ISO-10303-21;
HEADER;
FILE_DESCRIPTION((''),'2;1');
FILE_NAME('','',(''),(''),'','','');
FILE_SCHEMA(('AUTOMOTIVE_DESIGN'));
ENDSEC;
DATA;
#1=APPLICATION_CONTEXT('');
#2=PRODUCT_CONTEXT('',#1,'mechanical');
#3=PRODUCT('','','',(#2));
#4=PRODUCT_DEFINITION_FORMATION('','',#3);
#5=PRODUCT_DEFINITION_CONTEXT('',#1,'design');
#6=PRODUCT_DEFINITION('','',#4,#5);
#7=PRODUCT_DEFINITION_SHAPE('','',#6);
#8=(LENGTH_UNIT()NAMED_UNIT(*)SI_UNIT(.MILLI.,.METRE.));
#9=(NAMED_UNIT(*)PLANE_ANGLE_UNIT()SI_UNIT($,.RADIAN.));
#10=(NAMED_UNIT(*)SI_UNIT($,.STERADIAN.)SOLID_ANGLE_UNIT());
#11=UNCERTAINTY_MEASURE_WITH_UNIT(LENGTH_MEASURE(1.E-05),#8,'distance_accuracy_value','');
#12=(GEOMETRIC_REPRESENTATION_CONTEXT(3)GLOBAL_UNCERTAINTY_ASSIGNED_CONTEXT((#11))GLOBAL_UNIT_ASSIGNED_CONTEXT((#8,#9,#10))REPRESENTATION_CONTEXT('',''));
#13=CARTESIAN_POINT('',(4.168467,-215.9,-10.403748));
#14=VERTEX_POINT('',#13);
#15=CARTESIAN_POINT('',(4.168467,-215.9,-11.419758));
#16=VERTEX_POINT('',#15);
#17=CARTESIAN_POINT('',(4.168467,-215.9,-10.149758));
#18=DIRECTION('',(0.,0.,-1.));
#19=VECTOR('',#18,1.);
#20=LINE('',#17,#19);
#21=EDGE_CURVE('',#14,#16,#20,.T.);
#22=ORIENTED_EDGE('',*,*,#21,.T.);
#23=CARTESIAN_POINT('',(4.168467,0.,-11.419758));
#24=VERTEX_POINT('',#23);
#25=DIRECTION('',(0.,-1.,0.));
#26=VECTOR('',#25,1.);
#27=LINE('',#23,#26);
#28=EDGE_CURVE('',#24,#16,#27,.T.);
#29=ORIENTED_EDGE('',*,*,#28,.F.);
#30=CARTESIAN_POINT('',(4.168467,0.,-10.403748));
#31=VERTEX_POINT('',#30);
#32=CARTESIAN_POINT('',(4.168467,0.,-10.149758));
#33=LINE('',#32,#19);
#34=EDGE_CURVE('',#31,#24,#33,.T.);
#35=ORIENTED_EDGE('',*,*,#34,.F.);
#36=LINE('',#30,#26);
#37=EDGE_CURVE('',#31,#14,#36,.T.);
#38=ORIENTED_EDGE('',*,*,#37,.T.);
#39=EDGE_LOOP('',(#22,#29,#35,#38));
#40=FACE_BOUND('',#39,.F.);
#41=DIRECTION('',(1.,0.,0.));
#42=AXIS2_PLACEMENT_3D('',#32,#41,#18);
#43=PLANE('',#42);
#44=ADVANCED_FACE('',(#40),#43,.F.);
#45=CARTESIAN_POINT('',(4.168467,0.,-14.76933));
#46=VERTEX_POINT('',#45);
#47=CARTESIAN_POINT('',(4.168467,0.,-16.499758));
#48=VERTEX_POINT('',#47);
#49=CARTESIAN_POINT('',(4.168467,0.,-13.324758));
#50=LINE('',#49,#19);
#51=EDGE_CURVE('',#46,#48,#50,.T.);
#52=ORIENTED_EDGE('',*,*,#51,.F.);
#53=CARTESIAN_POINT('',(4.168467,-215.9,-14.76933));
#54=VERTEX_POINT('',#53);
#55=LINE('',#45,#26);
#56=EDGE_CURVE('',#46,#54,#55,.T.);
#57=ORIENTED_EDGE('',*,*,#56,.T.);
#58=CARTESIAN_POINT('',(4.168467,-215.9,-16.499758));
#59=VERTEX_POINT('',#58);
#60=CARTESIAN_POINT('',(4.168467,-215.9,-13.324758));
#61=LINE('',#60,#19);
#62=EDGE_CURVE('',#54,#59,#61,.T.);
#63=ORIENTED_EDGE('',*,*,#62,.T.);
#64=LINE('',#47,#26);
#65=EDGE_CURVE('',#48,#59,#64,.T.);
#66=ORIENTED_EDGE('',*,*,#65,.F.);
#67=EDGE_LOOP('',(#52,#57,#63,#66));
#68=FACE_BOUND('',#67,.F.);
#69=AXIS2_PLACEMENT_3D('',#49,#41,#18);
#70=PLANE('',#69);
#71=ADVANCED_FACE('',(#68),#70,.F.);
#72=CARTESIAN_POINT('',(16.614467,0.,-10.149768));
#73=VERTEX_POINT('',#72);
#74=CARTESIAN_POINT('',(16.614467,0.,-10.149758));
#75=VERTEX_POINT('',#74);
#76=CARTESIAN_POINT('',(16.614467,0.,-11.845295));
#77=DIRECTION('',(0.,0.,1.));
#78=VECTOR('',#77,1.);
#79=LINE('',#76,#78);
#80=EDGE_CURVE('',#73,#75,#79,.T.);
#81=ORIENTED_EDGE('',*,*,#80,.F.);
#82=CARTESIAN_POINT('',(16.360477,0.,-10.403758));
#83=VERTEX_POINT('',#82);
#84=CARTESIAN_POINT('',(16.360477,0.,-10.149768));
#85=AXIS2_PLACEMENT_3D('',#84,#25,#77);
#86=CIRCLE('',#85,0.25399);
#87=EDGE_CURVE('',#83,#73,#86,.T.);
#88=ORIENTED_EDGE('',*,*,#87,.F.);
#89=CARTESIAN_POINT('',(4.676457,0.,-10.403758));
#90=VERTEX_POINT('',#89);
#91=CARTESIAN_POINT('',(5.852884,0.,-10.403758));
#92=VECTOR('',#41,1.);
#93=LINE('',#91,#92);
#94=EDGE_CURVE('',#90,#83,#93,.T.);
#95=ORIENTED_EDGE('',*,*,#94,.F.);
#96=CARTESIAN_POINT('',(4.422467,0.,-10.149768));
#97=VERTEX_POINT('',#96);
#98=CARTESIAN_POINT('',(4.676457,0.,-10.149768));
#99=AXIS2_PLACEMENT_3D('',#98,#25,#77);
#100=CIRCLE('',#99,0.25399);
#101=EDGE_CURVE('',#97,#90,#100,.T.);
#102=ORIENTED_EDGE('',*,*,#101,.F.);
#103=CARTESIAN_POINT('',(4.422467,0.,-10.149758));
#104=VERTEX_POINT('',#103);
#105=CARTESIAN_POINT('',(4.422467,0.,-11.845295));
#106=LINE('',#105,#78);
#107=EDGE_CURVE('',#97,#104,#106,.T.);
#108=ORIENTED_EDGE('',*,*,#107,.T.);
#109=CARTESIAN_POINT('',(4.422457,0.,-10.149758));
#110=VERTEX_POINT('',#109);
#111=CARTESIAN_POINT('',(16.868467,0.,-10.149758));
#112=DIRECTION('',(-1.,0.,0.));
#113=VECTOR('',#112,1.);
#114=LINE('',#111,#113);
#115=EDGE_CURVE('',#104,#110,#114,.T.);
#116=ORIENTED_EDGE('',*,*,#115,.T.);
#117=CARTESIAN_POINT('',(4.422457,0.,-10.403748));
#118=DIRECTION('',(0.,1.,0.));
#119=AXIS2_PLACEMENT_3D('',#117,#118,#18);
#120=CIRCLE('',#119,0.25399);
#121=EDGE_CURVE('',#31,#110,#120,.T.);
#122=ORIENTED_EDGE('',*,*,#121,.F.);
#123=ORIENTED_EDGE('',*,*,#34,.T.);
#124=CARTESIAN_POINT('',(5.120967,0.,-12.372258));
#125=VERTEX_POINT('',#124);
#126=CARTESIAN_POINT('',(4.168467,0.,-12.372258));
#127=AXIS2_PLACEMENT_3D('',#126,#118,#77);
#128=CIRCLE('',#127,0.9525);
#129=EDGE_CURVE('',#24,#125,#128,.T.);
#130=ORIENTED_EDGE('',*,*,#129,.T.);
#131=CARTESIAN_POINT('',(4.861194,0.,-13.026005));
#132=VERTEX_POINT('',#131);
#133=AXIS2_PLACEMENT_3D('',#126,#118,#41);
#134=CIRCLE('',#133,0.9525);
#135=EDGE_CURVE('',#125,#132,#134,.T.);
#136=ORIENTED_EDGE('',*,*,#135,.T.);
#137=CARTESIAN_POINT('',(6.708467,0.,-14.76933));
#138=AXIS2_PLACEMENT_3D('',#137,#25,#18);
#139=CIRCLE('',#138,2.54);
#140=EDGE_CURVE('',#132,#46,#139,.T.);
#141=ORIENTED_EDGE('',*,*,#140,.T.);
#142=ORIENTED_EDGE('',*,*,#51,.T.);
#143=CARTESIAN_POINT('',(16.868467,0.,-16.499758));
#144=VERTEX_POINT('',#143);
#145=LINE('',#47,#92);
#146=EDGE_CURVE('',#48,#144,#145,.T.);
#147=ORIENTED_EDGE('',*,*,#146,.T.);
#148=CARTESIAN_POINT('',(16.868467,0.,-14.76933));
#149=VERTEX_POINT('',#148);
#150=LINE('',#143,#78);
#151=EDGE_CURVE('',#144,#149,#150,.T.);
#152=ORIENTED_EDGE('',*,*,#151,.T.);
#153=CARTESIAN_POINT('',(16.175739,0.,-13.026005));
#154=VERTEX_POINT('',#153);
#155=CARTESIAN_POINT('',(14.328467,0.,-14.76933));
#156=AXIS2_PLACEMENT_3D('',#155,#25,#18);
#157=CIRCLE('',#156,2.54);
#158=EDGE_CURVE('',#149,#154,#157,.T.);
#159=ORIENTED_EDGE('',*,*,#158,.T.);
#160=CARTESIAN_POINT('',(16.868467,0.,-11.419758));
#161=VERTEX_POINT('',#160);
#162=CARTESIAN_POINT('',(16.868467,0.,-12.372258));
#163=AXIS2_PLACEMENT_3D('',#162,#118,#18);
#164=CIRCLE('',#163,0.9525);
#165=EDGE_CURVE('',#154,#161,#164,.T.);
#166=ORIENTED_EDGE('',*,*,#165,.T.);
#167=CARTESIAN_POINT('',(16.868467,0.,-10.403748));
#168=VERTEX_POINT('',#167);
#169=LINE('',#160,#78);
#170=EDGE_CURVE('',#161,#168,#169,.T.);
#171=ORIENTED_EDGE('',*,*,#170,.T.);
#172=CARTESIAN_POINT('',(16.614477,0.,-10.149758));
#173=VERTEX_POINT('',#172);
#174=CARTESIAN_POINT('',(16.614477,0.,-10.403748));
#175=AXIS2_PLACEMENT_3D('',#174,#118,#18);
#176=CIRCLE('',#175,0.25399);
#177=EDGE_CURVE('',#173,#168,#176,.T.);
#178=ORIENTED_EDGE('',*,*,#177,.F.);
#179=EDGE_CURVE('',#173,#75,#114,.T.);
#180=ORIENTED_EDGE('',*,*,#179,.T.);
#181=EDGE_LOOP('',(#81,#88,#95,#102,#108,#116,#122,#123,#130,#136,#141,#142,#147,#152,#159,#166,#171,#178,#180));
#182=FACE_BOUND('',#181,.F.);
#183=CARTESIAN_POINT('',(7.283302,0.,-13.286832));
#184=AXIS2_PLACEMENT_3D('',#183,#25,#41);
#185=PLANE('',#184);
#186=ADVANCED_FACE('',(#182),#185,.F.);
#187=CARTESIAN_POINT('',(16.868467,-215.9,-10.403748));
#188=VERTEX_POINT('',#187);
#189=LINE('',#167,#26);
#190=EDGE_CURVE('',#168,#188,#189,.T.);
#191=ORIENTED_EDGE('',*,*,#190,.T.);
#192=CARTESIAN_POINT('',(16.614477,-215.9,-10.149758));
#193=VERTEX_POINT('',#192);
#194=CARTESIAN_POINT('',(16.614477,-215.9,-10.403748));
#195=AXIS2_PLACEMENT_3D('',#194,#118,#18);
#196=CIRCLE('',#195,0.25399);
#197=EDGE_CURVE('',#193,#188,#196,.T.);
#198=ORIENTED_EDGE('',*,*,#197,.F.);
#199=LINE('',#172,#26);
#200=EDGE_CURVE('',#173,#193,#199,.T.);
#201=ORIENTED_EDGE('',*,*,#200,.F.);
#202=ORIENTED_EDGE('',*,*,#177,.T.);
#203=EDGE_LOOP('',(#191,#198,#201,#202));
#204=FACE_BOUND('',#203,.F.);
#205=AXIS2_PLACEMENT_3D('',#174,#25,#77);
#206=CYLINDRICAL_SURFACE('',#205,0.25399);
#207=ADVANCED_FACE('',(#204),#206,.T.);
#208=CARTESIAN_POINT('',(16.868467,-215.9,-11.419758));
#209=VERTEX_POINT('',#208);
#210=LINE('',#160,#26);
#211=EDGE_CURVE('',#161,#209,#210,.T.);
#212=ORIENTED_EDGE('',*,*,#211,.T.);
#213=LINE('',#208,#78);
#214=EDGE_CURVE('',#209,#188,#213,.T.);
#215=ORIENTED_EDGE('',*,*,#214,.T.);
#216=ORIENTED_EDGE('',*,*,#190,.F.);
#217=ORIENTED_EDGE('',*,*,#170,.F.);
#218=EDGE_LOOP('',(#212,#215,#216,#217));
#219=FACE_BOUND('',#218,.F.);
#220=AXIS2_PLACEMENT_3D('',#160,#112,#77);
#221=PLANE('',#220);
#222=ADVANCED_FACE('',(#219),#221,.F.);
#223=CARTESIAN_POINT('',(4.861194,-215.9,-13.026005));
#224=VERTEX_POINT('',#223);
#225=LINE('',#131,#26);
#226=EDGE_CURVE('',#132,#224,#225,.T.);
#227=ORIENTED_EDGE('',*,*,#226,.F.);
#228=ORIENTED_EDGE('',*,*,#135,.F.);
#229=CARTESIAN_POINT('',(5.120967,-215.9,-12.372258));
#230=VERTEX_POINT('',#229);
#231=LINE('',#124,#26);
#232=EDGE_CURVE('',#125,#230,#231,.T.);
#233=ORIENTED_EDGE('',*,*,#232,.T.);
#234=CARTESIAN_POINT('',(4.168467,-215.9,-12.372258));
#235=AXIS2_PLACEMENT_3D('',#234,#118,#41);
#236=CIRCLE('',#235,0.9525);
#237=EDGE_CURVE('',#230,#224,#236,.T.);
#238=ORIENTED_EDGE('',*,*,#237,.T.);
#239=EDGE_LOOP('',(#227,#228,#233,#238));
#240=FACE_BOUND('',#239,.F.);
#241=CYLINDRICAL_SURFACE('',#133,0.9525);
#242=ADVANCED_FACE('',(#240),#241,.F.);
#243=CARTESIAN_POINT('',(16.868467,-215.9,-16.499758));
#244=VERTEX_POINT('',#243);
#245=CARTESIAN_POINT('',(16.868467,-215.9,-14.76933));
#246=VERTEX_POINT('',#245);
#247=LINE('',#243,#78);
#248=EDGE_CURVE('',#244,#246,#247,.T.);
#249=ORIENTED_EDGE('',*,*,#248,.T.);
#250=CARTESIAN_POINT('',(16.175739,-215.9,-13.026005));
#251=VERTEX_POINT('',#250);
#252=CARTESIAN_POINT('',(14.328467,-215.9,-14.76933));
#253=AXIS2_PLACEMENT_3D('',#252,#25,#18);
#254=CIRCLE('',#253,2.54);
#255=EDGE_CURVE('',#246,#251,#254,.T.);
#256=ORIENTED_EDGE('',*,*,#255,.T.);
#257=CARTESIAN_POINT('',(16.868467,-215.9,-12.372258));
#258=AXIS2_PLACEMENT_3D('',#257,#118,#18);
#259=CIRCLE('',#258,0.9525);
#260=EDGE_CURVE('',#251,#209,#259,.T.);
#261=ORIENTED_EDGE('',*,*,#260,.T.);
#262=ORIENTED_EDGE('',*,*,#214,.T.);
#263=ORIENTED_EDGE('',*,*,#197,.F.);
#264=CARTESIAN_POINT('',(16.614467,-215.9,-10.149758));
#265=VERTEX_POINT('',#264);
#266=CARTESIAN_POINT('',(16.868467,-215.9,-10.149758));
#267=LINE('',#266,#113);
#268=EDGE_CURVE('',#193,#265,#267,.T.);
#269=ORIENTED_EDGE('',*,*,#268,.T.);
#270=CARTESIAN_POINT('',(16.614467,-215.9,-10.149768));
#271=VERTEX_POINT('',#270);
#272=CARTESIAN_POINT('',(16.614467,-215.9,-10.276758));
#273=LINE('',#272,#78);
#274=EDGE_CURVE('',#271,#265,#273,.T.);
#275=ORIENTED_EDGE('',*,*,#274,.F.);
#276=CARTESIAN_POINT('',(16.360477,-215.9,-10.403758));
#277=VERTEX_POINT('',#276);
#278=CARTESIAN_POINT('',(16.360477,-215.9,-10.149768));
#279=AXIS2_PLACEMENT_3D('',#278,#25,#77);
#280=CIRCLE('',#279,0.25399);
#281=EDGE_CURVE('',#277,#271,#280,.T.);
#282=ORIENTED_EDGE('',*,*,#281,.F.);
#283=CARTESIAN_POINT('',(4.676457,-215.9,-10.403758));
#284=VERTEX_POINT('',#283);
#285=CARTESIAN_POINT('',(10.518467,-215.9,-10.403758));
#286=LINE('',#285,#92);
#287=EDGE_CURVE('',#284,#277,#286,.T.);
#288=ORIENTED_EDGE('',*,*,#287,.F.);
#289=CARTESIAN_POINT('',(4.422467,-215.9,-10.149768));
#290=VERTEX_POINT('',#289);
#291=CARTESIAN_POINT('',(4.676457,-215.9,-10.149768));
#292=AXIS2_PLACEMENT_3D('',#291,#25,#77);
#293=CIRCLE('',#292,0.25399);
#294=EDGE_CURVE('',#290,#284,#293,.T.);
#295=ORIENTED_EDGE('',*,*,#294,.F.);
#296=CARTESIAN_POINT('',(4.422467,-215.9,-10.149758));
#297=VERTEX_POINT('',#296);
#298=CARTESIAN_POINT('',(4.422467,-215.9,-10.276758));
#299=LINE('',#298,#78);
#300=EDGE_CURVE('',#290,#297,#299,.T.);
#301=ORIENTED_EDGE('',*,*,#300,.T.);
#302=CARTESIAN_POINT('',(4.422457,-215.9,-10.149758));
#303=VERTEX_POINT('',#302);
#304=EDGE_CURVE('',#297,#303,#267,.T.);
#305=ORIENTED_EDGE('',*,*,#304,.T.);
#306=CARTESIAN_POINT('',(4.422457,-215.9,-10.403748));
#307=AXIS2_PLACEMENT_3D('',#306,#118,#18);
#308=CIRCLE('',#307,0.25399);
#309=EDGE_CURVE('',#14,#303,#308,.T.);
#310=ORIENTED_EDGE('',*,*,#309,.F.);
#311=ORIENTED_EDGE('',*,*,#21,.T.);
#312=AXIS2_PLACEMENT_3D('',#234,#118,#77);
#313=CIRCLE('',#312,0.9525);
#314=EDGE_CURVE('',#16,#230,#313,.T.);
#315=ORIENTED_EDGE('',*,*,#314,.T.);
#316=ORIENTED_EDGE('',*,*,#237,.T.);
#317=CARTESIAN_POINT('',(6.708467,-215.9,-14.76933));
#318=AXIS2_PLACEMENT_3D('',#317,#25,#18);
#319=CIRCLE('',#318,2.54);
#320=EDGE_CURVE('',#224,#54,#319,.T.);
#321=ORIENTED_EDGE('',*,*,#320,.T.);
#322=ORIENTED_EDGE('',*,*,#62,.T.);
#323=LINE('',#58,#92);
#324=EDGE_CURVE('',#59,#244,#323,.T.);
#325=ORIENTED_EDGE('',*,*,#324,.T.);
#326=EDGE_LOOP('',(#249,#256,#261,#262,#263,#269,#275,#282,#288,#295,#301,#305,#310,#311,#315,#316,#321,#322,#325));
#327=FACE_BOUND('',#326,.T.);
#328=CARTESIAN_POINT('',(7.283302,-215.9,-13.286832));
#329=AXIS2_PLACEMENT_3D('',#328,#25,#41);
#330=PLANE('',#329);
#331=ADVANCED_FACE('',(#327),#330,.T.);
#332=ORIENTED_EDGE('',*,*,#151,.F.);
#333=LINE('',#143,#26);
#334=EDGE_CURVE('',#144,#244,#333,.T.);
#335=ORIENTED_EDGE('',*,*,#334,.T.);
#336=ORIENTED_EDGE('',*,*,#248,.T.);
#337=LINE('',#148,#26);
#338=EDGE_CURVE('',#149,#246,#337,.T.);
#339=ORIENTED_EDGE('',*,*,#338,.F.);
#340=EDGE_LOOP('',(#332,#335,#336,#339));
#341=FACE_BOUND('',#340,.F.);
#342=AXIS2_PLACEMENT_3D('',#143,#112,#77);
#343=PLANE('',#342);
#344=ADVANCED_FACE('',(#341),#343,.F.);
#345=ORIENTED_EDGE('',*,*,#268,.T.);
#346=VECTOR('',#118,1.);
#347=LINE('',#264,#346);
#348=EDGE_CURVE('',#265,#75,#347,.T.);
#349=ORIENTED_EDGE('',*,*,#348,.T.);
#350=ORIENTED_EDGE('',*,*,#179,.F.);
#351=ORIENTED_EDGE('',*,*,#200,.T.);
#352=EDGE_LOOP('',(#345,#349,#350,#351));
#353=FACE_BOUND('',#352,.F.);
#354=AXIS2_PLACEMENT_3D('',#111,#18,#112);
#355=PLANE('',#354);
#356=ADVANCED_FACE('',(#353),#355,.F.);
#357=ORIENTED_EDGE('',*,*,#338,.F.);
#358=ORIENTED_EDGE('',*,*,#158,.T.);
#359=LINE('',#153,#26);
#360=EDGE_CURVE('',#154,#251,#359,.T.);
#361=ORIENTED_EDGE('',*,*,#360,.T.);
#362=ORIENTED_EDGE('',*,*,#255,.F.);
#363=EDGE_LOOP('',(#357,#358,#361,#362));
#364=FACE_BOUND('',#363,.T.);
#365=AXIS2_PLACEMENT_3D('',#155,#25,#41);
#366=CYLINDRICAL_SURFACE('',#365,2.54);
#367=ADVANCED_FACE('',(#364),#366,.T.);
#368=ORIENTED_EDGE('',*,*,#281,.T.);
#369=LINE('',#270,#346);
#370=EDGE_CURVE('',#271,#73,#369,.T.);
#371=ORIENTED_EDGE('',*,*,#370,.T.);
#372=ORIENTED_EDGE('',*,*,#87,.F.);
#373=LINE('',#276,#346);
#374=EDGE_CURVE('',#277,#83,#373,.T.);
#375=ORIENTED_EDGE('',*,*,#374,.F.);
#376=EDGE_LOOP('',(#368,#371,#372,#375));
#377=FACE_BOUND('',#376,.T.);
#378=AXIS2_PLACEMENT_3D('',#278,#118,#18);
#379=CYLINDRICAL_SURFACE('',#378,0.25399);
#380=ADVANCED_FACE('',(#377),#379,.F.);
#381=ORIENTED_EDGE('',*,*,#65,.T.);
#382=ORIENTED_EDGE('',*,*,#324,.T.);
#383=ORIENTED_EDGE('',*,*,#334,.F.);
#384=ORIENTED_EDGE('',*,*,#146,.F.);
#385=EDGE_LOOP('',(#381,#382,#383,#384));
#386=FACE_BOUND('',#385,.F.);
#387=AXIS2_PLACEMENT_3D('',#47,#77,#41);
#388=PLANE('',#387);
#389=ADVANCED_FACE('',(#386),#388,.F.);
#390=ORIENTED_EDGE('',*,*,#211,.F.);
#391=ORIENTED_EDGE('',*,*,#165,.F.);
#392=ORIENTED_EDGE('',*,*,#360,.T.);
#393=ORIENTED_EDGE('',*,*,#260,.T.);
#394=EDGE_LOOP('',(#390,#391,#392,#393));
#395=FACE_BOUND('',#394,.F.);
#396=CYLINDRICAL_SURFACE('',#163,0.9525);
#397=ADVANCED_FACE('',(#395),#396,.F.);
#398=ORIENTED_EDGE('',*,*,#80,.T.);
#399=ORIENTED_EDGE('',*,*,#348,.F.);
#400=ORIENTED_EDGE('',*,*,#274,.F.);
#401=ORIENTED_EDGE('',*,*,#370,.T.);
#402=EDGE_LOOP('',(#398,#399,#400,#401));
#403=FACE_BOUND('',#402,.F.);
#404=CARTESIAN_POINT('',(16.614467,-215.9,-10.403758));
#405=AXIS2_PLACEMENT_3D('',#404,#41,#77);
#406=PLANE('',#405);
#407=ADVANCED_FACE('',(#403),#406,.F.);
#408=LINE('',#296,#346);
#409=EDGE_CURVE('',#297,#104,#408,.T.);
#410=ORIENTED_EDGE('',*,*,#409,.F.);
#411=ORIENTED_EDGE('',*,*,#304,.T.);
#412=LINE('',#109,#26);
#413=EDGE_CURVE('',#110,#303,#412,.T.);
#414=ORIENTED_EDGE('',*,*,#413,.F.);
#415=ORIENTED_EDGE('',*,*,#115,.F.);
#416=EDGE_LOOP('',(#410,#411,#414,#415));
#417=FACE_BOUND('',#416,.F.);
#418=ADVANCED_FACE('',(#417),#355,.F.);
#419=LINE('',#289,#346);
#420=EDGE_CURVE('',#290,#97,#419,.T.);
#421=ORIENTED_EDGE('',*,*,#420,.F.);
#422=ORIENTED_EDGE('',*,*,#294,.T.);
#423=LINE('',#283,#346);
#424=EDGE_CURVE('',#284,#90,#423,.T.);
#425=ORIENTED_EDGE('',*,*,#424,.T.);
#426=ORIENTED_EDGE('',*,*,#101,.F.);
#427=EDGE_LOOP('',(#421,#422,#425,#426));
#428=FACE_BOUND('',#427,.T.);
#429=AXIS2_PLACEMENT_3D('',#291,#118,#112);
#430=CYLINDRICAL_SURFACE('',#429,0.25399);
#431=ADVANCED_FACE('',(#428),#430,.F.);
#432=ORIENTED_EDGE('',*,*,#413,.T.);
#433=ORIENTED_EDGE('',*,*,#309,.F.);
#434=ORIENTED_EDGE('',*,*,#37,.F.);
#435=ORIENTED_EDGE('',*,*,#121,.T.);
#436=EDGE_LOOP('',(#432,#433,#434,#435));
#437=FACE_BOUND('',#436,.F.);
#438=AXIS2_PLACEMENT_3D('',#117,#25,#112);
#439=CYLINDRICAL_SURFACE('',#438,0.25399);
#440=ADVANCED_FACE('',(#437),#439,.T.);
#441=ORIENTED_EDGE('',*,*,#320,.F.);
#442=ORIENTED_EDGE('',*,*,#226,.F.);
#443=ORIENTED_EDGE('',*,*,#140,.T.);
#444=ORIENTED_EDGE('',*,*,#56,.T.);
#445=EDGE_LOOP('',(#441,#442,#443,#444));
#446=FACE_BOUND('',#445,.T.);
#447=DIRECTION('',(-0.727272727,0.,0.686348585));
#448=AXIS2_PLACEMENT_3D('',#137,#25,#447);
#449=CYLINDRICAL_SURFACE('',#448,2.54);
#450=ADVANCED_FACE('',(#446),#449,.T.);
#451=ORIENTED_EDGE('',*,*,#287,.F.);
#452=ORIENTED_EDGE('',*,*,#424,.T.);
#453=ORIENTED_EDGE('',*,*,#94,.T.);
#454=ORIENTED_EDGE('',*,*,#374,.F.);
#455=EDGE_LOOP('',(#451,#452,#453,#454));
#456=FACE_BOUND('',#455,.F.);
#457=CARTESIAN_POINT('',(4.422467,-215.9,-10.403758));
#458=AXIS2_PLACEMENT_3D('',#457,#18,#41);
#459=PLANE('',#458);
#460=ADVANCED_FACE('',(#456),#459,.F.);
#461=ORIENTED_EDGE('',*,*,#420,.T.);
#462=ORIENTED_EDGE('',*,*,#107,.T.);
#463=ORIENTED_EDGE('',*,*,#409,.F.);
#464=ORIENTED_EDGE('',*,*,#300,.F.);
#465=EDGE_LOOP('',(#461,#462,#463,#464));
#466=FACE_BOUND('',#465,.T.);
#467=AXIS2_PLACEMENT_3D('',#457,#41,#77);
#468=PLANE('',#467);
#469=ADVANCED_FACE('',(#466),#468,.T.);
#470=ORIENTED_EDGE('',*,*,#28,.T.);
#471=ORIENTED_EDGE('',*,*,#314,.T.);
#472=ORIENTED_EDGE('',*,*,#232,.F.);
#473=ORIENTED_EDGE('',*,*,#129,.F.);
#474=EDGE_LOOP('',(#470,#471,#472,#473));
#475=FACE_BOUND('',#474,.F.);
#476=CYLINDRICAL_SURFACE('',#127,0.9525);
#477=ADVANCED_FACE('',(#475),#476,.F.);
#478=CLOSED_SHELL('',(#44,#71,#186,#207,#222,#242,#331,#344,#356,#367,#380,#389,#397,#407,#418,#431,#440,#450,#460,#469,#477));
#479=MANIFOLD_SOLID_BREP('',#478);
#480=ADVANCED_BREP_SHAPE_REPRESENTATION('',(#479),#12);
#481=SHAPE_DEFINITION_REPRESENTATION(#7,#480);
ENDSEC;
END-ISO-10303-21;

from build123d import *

# Parameters (mm, degrees)
F1_DEPTH = 215.9
F2_R     = 2.54
F3_W     = 12.192
F3_H     = 0.254
F4_DEPTH = 215.901
F5_R     = 0.25399


# Not quite as in the source:
# - a fillet or chamfer is up to 0.001 mm smaller than in the source, because OpenCascade refuses the exact size


with BuildPart() as f1:
    # F0 (on Front) → F1 (new body)
    with BuildSketch(Plane.XZ):
        with BuildLine():
            Line((10.5184665114, -10.1497577667), (4.1684665114, -10.1497577667))
            Line((4.1684665114, -10.1497577667), (4.1684665114, -11.4197577667))
            ThreePointArc((4.1684665114, -11.4197577667), (4.8419857204, -11.6987385576), (5.1209665114, -12.3722577667))
            ThreePointArc((5.1209665114, -12.3722577667), (4.8419857204, -13.0457769758), (4.1684665114, -13.3247577667))
            Line((4.1684665114, -13.3247577667), (4.1684665114, -16.4997577667))
            Line((4.1684665114, -16.4997577667), (10.5184665114, -16.4997577667))
            Line((10.5184665114, -16.4997577667), (10.5184665114, -10.1497577667))
        make_face()
        with BuildLine():
            Line((16.8684665114, -10.1497577667), (10.5184665114, -10.1497577667))
            Line((10.5184665114, -10.1497577667), (10.5184665114, -16.4997577667))
            Line((10.5184665114, -16.4997577667), (16.8684665114, -16.4997577667))
            Line((16.8684665114, -16.4997577667), (16.8684665114, -13.3247577667))
            ThreePointArc((16.8684665114, -13.3247577667), (15.9159665114, -12.3722577667), (16.8684665114, -11.4197577667))
            Line((16.8684665114, -11.4197577667), (16.8684665114, -10.1497577667))
        make_face()
    extrude(amount=F1_DEPTH)

    # F2
    f2_edges = [f1.edges().sort_by_distance(p)[0] for p in [
        (16.868467, -107.95, -13.324758),
        (4.168467, -107.95, -13.324758),
    ]]
    fillet(f2_edges, radius=F2_R)

    # F3 (on face) → F4 (cut, through all)
    with BuildSketch(Plane.XZ.offset(215.9)):
        with Locations((10.5184665114, -10.2767577667)):
            Rectangle(F3_W, F3_H)
    extrude(amount=-F4_DEPTH, mode=Mode.SUBTRACT)

    # F5 (radius 0.254 in the source; OpenCascade refuses exactly that, so slightly less here)
    f5_edges = [f1.edges().sort_by_distance(p)[0] for p in [
        (4.422467, -107.95, -10.403758),
        (16.614467, -107.95, -10.403758),
        (16.868467, -107.95, -10.149758),
        (4.168467, -107.95, -10.149758),
    ]]
    fillet(f5_edges, radius=F5_R)


solid = f1.part
